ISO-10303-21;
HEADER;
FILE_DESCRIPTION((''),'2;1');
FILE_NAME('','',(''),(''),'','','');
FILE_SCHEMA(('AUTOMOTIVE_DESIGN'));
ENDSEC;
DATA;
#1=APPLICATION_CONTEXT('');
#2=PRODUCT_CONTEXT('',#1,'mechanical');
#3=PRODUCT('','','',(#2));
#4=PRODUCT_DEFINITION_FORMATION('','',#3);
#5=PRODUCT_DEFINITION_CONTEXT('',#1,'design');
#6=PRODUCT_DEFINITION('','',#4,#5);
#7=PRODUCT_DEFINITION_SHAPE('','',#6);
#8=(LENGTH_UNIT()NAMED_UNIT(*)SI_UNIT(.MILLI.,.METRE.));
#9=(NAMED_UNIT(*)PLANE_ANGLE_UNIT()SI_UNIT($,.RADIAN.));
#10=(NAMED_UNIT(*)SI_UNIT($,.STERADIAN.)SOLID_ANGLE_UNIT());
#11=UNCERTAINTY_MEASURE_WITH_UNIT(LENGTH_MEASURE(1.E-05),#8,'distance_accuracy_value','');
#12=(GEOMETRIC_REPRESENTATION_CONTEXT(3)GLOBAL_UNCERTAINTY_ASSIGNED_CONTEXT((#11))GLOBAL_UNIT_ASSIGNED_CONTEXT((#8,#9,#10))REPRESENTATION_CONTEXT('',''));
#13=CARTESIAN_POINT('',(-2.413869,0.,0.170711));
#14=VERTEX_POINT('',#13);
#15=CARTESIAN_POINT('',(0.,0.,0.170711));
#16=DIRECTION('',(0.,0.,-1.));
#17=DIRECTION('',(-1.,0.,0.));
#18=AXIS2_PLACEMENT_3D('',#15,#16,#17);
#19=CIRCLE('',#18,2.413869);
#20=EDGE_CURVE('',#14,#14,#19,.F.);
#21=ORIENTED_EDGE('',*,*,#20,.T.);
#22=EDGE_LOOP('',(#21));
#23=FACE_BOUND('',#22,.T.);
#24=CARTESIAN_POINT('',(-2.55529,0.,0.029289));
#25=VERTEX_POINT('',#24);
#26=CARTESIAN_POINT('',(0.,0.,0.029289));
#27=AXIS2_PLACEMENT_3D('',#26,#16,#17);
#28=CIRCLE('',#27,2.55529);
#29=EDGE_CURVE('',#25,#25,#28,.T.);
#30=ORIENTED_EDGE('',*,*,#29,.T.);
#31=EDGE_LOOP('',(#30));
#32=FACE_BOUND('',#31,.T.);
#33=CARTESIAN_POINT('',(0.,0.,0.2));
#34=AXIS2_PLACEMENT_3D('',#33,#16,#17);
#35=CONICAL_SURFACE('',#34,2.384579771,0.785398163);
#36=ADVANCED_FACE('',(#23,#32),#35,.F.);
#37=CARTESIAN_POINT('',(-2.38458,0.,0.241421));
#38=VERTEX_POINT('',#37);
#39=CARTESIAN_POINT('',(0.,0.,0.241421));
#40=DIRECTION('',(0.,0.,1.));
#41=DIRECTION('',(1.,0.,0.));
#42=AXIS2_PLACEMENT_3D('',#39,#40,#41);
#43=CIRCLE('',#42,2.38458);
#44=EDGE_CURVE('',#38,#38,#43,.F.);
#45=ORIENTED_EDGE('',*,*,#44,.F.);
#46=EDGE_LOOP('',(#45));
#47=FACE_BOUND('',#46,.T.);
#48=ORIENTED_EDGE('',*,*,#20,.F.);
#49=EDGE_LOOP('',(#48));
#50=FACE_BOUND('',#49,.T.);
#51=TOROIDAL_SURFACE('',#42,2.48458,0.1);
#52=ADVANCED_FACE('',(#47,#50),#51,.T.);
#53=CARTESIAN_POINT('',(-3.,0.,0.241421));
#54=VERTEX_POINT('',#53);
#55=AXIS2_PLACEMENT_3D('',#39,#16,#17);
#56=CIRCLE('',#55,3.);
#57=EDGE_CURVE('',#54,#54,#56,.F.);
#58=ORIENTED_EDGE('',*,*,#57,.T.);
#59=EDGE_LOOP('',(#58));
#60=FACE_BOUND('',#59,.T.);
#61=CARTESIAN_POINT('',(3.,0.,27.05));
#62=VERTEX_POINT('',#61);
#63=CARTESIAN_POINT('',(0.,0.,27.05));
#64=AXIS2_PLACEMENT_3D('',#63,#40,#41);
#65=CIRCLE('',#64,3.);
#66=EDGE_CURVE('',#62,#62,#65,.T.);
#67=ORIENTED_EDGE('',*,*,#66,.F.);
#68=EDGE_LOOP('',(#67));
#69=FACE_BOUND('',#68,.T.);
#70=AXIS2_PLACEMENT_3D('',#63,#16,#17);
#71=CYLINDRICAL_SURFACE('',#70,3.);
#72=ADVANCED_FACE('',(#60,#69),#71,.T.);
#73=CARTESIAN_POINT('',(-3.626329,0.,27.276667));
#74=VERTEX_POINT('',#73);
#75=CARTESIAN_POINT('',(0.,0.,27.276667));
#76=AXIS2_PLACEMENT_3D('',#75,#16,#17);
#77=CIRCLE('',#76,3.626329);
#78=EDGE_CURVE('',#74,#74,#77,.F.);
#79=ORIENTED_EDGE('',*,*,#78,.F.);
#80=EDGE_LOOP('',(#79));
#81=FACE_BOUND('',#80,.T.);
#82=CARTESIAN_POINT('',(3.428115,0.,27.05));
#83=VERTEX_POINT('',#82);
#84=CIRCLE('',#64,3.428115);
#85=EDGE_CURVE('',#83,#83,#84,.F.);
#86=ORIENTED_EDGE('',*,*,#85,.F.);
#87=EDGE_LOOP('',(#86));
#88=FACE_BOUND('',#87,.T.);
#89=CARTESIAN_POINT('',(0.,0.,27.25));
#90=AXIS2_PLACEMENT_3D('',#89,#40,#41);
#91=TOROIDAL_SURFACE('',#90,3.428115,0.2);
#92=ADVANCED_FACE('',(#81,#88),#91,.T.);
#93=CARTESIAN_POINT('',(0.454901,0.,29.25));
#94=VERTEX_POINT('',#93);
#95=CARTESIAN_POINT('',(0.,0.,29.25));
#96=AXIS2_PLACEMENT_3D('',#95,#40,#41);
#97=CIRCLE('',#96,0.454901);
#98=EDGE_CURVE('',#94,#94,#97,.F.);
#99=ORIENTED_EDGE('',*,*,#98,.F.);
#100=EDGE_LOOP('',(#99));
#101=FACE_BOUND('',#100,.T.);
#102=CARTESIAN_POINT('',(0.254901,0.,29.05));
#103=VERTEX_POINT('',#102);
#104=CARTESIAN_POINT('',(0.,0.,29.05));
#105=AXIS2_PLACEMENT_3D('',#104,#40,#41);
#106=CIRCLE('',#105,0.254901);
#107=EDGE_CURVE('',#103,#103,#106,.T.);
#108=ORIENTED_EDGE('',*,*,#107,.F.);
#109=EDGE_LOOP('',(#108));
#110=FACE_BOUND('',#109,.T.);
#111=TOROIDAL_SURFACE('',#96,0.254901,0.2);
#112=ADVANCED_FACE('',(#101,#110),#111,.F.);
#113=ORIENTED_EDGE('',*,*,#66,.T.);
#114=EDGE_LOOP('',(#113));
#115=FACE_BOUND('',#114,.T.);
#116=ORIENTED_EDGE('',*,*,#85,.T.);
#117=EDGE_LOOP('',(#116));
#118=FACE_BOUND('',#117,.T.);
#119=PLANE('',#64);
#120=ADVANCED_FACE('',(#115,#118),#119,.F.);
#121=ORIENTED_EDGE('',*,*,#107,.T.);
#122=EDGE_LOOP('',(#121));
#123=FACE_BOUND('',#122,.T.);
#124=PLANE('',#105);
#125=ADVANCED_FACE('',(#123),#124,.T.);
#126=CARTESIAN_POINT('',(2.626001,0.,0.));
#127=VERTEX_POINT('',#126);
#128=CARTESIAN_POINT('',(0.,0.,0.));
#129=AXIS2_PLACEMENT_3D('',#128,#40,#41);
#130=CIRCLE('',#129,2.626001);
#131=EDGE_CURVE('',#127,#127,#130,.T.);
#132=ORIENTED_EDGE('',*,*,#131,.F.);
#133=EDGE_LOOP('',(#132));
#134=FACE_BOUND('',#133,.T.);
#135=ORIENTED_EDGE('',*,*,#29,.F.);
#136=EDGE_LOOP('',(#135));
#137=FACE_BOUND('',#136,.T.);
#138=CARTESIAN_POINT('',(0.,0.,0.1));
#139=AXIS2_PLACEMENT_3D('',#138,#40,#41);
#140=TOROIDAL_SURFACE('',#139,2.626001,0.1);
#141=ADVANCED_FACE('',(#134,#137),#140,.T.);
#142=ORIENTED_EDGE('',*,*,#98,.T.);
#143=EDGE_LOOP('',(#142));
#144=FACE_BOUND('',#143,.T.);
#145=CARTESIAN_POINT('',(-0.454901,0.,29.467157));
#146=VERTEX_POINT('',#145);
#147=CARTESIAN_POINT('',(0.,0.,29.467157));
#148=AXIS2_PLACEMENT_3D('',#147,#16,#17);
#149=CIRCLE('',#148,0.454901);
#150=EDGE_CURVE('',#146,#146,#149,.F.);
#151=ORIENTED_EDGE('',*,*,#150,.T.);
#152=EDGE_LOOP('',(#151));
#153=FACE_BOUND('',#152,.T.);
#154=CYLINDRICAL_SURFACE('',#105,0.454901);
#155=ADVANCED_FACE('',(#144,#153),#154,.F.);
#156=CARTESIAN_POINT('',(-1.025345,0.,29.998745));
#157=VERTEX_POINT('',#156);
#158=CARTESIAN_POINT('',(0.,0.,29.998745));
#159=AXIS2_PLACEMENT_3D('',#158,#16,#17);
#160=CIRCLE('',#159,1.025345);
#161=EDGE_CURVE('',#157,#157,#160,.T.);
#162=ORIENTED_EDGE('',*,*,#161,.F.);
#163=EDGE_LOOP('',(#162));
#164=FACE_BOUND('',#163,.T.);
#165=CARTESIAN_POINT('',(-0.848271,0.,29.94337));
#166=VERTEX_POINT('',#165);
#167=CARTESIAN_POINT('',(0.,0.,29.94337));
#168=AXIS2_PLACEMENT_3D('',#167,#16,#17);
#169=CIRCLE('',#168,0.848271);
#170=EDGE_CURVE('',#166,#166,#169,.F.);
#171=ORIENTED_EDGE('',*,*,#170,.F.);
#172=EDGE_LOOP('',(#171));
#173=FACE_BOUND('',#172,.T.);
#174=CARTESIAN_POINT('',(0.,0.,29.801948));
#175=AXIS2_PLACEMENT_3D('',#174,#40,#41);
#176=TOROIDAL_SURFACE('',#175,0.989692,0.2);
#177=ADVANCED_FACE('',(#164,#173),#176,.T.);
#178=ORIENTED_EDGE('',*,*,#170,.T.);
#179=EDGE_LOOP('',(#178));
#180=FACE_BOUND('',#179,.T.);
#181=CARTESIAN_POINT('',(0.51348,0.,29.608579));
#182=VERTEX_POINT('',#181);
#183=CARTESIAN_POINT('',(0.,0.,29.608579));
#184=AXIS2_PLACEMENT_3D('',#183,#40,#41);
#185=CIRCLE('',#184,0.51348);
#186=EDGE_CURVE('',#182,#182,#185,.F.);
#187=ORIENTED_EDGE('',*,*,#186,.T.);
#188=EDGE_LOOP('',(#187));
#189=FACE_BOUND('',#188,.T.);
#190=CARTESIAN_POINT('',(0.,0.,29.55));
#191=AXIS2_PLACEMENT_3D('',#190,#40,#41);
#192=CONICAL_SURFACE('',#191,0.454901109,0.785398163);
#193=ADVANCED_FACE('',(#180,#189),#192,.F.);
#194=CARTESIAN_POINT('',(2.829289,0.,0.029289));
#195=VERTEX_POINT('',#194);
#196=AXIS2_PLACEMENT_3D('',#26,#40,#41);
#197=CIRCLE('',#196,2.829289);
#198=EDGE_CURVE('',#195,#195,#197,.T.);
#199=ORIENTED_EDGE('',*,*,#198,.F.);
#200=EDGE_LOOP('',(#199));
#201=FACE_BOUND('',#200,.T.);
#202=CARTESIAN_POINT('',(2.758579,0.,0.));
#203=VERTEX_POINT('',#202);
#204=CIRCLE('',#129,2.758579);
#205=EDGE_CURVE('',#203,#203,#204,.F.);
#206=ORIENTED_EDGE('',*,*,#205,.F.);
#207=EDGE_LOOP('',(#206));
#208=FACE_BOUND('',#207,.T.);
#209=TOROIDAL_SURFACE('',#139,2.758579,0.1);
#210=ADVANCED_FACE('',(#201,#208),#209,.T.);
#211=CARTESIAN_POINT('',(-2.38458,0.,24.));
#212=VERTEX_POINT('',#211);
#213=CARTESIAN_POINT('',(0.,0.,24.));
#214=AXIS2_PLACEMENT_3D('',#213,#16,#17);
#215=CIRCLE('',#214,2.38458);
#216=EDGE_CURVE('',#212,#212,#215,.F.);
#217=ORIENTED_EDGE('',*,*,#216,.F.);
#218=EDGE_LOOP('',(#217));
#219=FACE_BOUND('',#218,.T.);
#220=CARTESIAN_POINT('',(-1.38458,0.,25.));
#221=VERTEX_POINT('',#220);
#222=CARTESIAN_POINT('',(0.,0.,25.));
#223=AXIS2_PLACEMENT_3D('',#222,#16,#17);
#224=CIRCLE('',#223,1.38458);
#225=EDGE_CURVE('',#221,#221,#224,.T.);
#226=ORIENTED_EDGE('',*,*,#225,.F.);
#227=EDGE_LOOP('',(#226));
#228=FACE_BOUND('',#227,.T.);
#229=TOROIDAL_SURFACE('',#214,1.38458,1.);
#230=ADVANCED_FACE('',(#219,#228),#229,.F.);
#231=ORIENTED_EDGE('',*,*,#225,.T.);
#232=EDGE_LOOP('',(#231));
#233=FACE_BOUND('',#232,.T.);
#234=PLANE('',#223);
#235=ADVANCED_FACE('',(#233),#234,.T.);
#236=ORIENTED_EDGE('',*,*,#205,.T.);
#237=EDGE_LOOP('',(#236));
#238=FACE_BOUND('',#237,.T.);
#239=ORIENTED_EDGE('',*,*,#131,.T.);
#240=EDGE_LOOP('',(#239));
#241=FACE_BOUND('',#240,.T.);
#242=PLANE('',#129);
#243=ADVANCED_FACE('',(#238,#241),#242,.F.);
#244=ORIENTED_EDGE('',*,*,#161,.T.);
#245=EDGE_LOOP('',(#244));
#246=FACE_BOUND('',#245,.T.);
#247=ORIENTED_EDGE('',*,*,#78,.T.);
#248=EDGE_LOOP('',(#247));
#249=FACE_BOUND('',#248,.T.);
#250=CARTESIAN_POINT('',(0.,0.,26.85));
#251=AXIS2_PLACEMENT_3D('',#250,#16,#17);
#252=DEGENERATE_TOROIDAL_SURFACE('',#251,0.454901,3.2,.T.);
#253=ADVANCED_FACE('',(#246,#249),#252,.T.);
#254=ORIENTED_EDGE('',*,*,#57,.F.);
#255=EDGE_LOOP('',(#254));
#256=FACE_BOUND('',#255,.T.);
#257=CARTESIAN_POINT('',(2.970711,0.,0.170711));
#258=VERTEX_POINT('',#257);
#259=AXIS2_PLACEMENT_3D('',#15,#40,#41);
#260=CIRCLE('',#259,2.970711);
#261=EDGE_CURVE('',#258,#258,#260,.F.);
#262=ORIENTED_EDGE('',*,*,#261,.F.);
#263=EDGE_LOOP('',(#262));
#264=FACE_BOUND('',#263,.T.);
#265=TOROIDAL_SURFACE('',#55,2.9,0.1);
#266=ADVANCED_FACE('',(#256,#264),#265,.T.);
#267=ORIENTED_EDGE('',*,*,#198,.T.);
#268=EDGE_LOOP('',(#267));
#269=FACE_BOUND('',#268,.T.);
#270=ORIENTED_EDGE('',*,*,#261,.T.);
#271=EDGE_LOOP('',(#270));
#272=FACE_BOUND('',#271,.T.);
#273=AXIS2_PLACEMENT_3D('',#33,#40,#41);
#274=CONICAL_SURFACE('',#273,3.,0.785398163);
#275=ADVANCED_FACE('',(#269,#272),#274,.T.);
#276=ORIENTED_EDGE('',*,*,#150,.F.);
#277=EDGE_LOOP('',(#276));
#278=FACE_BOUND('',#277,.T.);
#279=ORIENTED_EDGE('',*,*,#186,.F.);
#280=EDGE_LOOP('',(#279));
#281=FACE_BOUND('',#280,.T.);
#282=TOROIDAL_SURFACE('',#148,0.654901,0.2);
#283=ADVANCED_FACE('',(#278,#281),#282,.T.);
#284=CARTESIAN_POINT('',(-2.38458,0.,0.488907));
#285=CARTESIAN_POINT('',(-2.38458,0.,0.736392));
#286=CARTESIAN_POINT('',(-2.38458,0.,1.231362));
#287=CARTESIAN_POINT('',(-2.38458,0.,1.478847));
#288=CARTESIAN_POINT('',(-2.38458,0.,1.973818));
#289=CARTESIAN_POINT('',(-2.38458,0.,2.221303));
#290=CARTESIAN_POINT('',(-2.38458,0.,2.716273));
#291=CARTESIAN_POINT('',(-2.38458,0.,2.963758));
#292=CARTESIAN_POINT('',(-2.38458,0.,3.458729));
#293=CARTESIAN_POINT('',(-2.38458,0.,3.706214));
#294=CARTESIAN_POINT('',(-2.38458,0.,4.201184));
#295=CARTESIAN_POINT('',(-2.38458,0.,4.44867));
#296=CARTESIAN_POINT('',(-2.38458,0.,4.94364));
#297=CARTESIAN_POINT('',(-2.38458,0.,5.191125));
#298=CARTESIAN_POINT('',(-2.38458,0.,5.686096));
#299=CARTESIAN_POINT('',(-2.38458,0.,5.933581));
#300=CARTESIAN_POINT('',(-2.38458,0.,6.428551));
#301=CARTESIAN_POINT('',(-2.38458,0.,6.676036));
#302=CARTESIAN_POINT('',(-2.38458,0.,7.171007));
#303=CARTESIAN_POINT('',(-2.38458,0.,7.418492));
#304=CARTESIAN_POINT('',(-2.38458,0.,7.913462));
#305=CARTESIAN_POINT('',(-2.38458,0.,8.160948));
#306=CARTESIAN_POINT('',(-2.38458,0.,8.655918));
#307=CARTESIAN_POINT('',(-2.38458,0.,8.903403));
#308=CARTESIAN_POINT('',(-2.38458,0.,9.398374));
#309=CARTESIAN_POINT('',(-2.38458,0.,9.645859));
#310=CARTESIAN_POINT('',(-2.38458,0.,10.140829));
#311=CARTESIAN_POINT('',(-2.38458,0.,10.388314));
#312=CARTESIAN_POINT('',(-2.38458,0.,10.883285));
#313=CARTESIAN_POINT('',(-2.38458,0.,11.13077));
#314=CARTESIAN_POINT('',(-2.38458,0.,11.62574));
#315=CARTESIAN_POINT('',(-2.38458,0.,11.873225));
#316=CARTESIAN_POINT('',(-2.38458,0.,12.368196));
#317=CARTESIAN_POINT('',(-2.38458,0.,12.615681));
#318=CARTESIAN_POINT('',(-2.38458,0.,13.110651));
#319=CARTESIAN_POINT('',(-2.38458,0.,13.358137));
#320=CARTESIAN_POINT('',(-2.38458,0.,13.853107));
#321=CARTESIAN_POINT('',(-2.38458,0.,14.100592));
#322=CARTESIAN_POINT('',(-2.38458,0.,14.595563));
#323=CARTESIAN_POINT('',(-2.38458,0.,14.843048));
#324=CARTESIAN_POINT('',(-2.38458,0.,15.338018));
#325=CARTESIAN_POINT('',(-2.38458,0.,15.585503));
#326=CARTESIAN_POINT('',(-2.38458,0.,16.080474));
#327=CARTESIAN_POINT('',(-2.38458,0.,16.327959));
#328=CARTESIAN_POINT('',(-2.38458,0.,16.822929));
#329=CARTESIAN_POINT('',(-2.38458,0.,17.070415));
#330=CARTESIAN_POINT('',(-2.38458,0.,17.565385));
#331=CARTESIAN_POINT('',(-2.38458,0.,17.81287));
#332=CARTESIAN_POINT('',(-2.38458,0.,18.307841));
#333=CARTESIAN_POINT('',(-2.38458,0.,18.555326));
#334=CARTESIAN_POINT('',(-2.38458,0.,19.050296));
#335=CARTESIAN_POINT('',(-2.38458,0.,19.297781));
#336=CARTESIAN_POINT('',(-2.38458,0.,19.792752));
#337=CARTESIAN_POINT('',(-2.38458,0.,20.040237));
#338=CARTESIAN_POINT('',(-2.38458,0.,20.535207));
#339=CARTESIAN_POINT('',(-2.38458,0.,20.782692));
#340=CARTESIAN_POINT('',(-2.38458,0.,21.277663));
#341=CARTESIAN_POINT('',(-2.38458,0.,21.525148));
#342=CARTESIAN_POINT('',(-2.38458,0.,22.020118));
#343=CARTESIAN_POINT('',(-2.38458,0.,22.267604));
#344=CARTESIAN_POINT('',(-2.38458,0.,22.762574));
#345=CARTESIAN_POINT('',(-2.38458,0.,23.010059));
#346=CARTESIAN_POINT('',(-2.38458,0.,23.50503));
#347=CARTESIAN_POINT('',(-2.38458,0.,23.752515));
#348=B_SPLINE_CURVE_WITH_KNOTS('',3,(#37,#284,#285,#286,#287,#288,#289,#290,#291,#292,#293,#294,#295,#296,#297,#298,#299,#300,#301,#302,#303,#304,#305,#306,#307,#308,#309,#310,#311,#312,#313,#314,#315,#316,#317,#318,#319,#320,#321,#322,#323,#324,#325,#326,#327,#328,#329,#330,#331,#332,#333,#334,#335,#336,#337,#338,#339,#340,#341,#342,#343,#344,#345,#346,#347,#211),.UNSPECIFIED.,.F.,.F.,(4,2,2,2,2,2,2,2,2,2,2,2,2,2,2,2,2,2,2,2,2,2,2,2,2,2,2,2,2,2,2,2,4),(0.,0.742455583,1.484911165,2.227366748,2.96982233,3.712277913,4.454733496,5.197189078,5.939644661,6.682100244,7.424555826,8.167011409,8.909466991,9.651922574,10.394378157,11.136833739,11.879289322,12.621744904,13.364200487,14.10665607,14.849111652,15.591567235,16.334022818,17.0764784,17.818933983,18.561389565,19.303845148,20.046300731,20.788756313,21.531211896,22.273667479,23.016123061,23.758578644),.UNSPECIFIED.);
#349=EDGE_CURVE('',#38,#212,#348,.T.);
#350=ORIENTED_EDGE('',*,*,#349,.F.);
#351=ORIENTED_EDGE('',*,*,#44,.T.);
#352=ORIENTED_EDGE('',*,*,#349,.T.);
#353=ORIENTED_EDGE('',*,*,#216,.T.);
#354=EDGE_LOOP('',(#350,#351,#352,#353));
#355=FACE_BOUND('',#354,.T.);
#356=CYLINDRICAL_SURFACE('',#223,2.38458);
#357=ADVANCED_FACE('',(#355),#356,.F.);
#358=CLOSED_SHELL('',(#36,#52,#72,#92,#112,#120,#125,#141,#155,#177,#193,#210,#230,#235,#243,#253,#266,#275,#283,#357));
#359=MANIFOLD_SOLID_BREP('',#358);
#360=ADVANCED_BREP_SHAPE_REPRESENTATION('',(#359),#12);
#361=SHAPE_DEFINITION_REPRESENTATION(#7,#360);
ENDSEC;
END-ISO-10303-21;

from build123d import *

# Parameters (mm, degrees)
SKETCH1_R           = 3
BOSS_EXTRUDE1_DEPTH = 27.05
SKETCH2_R           = 3.648644993
BOSS_EXTRUDE2_DEPTH = 3
FILLET1_R           = 3.2
FILLET2_R           = 0.2
SKETCH3_R           = 0.454901109
CUT_EXTRUDE1_DEPTH  = 1
FILLET3_R           = 0.2
CHAMFER1_SIZE       = 0.5
FILLET4_R           = 0.2
SKETCH4_R           = 2.384579771
CUT_EXTRUDE2_DEPTH  = 25
FILLET5_R           = 1
CHAMFER2_SIZE       = 0.2
FILLET6_R           = 0.1


with BuildPart() as part:
    # Sketch1 → Boss-Extrude1 (new body)
    with BuildSketch(Plane.XY):
        Circle(SKETCH1_R)
    extrude(amount=BOSS_EXTRUDE1_DEPTH)

    # Sketch2 → Boss-Extrude2 (add)
    with BuildSketch(Plane.XY.offset(27.05)):
        Circle(SKETCH2_R)
    extrude(amount=BOSS_EXTRUDE2_DEPTH)

    # Fillet1
    # the kernel refuses this fillet: 3.2 mm, written as the material it takes off along each edge
    with BuildSketch(Plane(origin=(0, 0, 30.05), x_dir=(1, 0, 0), z_dir=(0, -1, 0))) as fillet1_piece_1:
        with BuildLine():
            CenterArc((0.454901109, -3.2), FILLET1_R, 3.583321698, 86.416678302)
            Line((0.454901109, 0), (0.454901109, 0.064))
            Line((0.454901109, 0.064), (3.648644993, 0.064))
            Line((3.648644993, 0.064), (3.712644993, 0))
            ThreePointArc((3.712644993, 0), (3.712644993, -1.5), (3.712519871, -2.996))
            Line((3.712519871, -2.996), (3.648644993, -3))
        make_face()
    revolve(axis=Axis((0, 0, 30.05), (0, 0, 1)), mode=Mode.SUBTRACT)

    # Fillet2
    fillet2_edges = [part.edges().sort_by_distance(p)[0] for p in [
        (-3.648644993, 0, 27.05),
    ]]
    fillet(fillet2_edges, radius=FILLET2_R)

    # Sketch3 → Cut-Extrude1 (cut)
    with BuildSketch(Plane.XY.offset(30.05)):
        Circle(SKETCH3_R)
    extrude(amount=-CUT_EXTRUDE1_DEPTH, mode=Mode.SUBTRACT)

    # Fillet3
    fillet3_edges = [part.edges().sort_by_distance(p)[0] for p in [
        (-0.454901109, 0, 29.05),
    ]]
    fillet(fillet3_edges, radius=FILLET3_R)

    # Chamfer1
    # the kernel refuses this chamfer: 0.5 mm, written as the material it takes off along each edge
    with BuildSketch(Plane(origin=(0, 0, 30.05), x_dir=(1, 0, 0), z_dir=(0, -1, 0))) as chamfer1_piece_1:
        with BuildLine():
            Line((0.454901109, -CHAMFER1_SIZE), (0.920803088, -0.03409802))
            ThreePointArc((0.920803088, -0.03409802), (0.69499526, -0.009019775), (0.454901109, 0))
            Line((0.454901109, 0), (0.454901109, -CHAMFER1_SIZE))
        make_face()
    revolve(axis=Axis((0, 0, 30.05), (0, 0, 1)), mode=Mode.SUBTRACT)

    # Fillet4
    fillet4_edges = [part.edges().sort_by_distance(p)[0] for p in [
        (-0.454901109, 0, 29.55),
        (-0.920803088, 0, 30.01590198),
    ]]
    fillet(fillet4_edges, radius=FILLET4_R)

    # Sketch4 → Cut-Extrude2 (cut)
    with BuildSketch(Plane(origin=(0, 0, 0), x_dir=(-1, 0, 0), z_dir=(0, 0, -1))):
        Circle(SKETCH4_R)
    extrude(amount=-CUT_EXTRUDE2_DEPTH, mode=Mode.SUBTRACT)

    # Fillet5
    fillet5_edges = [part.edges().sort_by_distance(p)[0] for p in [
        (2.384579771, 0, 25),
    ]]
    fillet(fillet5_edges, radius=FILLET5_R)

    # Chamfer2
    chamfer2_edges = [part.edges().sort_by_distance(p)[0] for p in [
        (2.384579771, 0, 0),
        (-3, 0, 0),
    ]]
    chamfer(chamfer2_edges, length=CHAMFER2_SIZE)

    # Fillet6
    fillet6_edges = [part.edges().sort_by_distance(p)[0] for p in [
        (-3, 0, 0.2),
        (2.584579771, 0, 0),
        (-2.8, 0, 0),
        (2.384579771, 0, 0.2),
    ]]
    fillet(fillet6_edges, radius=FILLET6_R)


solid = part.part
